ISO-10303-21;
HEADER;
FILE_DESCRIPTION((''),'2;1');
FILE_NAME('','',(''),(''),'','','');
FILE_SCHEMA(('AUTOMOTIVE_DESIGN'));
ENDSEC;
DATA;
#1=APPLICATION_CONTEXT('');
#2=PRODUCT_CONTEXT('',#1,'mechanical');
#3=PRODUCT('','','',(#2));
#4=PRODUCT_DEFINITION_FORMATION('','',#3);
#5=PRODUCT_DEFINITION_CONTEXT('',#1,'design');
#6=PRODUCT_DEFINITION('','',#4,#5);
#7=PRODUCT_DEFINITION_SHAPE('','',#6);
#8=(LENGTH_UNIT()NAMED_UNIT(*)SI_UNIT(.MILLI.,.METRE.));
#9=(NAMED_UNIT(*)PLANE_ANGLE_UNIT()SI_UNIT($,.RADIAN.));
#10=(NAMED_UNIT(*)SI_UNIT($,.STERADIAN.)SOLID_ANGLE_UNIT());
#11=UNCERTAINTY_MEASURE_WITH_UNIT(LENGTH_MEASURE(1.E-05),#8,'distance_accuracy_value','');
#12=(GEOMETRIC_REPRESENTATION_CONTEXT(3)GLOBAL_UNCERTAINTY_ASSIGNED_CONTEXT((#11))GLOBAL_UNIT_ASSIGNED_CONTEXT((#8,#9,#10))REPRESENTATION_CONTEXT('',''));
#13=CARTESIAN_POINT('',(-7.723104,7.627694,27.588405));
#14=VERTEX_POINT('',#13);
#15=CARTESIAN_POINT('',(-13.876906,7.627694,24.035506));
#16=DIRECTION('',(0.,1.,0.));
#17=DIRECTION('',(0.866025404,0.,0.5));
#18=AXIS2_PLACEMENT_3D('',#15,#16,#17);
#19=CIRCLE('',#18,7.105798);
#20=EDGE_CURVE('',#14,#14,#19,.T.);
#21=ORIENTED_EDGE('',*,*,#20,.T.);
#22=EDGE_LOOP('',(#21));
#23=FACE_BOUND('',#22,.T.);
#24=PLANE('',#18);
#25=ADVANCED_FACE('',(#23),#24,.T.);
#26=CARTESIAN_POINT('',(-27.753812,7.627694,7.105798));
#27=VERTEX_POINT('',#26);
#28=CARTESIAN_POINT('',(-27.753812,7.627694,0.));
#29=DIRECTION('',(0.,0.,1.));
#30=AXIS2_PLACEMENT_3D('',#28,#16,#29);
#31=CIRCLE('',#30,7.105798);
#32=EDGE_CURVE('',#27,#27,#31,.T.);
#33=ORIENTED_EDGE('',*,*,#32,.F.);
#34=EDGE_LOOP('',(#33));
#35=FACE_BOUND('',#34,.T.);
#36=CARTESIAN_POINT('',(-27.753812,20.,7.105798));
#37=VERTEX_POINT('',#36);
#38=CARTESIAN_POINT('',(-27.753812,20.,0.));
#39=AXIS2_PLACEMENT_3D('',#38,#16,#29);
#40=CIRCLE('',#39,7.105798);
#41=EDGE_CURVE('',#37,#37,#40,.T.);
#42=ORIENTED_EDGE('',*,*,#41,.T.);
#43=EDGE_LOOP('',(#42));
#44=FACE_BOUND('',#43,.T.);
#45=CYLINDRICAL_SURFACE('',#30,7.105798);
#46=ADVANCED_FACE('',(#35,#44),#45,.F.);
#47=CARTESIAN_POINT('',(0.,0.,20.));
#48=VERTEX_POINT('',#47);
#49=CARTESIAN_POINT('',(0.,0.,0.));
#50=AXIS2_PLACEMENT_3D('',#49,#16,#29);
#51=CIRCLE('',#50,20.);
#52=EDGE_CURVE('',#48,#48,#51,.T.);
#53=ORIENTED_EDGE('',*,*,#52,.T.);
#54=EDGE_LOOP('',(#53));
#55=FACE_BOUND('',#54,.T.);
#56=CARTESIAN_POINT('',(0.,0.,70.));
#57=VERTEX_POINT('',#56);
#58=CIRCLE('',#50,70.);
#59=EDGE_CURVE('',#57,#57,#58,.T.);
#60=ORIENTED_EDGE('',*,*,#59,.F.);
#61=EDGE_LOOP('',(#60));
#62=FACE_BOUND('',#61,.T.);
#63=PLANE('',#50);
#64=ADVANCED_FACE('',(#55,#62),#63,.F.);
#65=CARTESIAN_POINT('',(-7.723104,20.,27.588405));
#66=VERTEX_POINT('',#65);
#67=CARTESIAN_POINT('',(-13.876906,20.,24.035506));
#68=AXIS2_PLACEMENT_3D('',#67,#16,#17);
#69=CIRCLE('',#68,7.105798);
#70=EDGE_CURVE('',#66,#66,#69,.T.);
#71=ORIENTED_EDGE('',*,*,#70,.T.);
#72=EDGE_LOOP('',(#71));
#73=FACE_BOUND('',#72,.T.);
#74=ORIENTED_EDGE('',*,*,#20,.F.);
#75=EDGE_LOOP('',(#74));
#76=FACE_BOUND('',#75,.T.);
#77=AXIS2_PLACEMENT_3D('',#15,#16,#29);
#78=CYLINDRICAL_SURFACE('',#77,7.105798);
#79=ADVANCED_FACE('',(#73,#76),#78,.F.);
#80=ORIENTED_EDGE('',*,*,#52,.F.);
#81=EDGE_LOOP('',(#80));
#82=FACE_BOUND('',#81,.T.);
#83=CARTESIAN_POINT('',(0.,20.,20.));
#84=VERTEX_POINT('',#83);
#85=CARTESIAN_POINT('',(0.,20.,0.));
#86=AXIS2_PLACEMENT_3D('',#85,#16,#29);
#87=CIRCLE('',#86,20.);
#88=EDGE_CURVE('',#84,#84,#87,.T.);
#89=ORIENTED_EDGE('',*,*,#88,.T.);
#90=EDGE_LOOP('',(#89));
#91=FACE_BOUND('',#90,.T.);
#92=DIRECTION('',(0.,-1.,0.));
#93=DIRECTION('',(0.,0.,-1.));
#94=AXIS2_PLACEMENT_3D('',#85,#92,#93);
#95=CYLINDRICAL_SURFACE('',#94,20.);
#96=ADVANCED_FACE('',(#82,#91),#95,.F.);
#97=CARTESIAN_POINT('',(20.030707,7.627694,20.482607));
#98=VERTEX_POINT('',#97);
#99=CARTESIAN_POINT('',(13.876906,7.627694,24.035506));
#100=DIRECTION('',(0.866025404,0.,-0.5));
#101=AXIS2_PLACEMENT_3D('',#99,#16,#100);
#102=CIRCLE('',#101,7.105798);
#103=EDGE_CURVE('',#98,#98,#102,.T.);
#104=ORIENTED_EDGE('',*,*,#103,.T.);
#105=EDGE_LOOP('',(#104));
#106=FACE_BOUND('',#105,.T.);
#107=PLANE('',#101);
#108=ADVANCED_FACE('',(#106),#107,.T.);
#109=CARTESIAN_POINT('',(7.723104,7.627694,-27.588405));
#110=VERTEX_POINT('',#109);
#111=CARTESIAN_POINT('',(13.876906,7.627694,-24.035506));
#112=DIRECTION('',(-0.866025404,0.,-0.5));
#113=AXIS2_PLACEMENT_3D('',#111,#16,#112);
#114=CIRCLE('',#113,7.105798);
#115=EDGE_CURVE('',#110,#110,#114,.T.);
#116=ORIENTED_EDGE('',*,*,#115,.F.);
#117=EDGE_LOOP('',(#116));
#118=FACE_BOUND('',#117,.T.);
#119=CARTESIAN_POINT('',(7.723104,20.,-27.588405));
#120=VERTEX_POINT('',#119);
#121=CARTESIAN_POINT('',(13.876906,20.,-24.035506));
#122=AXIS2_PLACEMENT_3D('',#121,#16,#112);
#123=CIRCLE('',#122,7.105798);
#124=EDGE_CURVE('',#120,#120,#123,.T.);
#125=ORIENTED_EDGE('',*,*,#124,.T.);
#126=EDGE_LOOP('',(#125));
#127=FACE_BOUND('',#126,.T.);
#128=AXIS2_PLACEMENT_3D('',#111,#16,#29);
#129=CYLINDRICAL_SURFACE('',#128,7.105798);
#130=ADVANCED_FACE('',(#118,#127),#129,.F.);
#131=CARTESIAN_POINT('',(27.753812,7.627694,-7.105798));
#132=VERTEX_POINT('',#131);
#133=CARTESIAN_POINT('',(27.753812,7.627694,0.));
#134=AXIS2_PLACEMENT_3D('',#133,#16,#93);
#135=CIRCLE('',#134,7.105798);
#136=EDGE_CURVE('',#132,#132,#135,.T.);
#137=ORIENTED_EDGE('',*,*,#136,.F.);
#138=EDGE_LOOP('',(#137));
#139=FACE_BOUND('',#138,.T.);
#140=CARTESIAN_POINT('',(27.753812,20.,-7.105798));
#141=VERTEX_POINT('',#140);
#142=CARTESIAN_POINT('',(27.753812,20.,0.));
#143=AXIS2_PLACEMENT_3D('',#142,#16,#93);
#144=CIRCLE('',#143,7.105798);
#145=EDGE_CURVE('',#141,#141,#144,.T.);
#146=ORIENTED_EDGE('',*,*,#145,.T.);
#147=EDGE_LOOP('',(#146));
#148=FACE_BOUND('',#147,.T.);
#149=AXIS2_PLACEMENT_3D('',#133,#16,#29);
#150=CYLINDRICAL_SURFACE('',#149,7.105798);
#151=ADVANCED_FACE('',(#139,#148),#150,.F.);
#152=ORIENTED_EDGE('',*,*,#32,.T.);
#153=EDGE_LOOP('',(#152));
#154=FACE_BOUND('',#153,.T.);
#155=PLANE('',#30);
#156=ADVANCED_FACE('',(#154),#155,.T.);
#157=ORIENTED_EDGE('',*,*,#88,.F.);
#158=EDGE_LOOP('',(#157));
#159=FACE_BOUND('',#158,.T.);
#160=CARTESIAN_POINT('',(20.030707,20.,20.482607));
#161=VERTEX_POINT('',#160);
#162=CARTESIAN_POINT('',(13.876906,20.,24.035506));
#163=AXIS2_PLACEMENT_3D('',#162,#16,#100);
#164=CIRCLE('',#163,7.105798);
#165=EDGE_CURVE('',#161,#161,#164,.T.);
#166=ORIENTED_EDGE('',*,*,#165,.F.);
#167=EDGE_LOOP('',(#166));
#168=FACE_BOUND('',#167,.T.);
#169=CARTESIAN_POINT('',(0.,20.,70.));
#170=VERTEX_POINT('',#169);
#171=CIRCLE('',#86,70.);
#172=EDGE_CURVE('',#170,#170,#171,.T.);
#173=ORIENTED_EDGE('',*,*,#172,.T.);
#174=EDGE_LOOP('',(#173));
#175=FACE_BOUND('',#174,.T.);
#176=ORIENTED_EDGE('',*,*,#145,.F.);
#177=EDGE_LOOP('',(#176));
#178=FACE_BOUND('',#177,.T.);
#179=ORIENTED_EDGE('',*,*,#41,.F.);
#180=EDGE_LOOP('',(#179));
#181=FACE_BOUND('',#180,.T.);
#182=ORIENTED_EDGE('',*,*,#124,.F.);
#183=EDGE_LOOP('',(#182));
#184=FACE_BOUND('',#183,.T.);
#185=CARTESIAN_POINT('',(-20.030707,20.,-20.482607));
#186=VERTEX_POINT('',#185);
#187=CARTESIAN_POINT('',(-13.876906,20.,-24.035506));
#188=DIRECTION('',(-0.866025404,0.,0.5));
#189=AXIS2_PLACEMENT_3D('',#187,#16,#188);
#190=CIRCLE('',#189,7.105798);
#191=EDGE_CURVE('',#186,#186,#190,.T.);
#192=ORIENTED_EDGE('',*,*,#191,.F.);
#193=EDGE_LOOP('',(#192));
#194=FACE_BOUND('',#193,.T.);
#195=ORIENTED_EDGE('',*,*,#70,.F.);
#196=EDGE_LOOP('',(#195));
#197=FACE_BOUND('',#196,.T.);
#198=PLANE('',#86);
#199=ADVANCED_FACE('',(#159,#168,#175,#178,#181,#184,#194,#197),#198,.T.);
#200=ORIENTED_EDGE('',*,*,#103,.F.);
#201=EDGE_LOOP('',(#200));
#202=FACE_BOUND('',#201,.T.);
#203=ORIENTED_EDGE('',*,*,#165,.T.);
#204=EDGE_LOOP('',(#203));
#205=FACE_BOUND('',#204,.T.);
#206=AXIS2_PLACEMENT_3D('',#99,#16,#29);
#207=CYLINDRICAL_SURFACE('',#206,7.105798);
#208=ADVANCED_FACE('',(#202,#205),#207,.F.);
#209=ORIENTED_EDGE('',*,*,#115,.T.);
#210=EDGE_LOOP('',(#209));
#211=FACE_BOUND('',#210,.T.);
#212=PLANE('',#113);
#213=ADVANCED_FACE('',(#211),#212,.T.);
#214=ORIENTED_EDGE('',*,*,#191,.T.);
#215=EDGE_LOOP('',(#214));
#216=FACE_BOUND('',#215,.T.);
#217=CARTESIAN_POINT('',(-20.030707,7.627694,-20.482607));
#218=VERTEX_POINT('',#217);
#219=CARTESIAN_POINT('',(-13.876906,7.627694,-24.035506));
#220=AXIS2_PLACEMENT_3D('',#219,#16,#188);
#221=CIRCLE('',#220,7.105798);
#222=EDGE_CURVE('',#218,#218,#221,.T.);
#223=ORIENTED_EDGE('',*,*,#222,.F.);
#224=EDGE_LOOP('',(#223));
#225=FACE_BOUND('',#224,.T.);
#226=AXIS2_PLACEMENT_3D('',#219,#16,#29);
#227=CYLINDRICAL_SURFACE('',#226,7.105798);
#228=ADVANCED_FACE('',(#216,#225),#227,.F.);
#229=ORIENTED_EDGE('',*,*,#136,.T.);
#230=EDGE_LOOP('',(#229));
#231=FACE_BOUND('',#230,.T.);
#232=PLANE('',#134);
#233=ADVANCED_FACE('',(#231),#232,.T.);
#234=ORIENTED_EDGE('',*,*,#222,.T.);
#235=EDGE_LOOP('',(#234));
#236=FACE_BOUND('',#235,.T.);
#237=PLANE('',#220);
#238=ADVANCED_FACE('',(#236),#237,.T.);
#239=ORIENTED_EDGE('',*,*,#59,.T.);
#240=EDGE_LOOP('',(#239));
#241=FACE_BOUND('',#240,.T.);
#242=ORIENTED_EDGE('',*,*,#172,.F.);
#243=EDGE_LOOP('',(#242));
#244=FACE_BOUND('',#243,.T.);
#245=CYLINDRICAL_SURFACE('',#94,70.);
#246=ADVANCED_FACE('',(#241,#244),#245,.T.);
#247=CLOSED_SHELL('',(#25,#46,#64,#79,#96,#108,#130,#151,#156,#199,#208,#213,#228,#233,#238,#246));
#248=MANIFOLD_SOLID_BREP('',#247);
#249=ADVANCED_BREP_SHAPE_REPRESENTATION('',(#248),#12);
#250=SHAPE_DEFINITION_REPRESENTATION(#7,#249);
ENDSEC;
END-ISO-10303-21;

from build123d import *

# Parameters (mm, degrees)
SKETCH1_R           = 70
BOSS_EXTRUDE1_DEPTH = 20
SKETCH2_R           = 20
CUT_EXTRUDE1_DEPTH  = 101.995049384
SKETCH3_R           = 7.105797858
CUT_EXTRUDE2_DEPTH  = 12.372306178
CIRPATTERN1_COUNT   = 6


with BuildPart() as part:
    # Sketch1 → Boss-Extrude1 (new body)
    with BuildSketch(Plane(origin=(0, 0, 0), x_dir=(1, 0, 0), z_dir=(0, 1, 0))):
        Circle(SKETCH1_R)
    extrude(amount=BOSS_EXTRUDE1_DEPTH)

    # Sketch2 → Cut-Extrude1 (cut, through all)
    with BuildSketch(Plane(origin=(0, 0, 0), x_dir=(1, 0, 0), z_dir=(0, 1, 0))):
        Circle(SKETCH2_R)
    extrude(amount=CUT_EXTRUDE1_DEPTH, mode=Mode.SUBTRACT)

    # Sketch3 → Cut-Extrude2 (cut)
    with BuildSketch(Plane(origin=(0, 20, 0), x_dir=(1, 0, 0), z_dir=(0, 1, 0))):
        with Locations((-27.753811795, 0)):
            Circle(SKETCH3_R)
    cut_extrude2 = extrude(amount=-CUT_EXTRUDE2_DEPTH, mode=Mode.SUBTRACT)

    # CirPattern1: Cut-Extrude2 ×6 about axis
    cirpattern1_axis = Axis((0, 0, 0), (0, 1, 0))
    for i in range(1, CIRPATTERN1_COUNT):
        add(cut_extrude2.rotate(cirpattern1_axis, i * 360 / CIRPATTERN1_COUNT), mode=Mode.SUBTRACT)


solid = part.part
